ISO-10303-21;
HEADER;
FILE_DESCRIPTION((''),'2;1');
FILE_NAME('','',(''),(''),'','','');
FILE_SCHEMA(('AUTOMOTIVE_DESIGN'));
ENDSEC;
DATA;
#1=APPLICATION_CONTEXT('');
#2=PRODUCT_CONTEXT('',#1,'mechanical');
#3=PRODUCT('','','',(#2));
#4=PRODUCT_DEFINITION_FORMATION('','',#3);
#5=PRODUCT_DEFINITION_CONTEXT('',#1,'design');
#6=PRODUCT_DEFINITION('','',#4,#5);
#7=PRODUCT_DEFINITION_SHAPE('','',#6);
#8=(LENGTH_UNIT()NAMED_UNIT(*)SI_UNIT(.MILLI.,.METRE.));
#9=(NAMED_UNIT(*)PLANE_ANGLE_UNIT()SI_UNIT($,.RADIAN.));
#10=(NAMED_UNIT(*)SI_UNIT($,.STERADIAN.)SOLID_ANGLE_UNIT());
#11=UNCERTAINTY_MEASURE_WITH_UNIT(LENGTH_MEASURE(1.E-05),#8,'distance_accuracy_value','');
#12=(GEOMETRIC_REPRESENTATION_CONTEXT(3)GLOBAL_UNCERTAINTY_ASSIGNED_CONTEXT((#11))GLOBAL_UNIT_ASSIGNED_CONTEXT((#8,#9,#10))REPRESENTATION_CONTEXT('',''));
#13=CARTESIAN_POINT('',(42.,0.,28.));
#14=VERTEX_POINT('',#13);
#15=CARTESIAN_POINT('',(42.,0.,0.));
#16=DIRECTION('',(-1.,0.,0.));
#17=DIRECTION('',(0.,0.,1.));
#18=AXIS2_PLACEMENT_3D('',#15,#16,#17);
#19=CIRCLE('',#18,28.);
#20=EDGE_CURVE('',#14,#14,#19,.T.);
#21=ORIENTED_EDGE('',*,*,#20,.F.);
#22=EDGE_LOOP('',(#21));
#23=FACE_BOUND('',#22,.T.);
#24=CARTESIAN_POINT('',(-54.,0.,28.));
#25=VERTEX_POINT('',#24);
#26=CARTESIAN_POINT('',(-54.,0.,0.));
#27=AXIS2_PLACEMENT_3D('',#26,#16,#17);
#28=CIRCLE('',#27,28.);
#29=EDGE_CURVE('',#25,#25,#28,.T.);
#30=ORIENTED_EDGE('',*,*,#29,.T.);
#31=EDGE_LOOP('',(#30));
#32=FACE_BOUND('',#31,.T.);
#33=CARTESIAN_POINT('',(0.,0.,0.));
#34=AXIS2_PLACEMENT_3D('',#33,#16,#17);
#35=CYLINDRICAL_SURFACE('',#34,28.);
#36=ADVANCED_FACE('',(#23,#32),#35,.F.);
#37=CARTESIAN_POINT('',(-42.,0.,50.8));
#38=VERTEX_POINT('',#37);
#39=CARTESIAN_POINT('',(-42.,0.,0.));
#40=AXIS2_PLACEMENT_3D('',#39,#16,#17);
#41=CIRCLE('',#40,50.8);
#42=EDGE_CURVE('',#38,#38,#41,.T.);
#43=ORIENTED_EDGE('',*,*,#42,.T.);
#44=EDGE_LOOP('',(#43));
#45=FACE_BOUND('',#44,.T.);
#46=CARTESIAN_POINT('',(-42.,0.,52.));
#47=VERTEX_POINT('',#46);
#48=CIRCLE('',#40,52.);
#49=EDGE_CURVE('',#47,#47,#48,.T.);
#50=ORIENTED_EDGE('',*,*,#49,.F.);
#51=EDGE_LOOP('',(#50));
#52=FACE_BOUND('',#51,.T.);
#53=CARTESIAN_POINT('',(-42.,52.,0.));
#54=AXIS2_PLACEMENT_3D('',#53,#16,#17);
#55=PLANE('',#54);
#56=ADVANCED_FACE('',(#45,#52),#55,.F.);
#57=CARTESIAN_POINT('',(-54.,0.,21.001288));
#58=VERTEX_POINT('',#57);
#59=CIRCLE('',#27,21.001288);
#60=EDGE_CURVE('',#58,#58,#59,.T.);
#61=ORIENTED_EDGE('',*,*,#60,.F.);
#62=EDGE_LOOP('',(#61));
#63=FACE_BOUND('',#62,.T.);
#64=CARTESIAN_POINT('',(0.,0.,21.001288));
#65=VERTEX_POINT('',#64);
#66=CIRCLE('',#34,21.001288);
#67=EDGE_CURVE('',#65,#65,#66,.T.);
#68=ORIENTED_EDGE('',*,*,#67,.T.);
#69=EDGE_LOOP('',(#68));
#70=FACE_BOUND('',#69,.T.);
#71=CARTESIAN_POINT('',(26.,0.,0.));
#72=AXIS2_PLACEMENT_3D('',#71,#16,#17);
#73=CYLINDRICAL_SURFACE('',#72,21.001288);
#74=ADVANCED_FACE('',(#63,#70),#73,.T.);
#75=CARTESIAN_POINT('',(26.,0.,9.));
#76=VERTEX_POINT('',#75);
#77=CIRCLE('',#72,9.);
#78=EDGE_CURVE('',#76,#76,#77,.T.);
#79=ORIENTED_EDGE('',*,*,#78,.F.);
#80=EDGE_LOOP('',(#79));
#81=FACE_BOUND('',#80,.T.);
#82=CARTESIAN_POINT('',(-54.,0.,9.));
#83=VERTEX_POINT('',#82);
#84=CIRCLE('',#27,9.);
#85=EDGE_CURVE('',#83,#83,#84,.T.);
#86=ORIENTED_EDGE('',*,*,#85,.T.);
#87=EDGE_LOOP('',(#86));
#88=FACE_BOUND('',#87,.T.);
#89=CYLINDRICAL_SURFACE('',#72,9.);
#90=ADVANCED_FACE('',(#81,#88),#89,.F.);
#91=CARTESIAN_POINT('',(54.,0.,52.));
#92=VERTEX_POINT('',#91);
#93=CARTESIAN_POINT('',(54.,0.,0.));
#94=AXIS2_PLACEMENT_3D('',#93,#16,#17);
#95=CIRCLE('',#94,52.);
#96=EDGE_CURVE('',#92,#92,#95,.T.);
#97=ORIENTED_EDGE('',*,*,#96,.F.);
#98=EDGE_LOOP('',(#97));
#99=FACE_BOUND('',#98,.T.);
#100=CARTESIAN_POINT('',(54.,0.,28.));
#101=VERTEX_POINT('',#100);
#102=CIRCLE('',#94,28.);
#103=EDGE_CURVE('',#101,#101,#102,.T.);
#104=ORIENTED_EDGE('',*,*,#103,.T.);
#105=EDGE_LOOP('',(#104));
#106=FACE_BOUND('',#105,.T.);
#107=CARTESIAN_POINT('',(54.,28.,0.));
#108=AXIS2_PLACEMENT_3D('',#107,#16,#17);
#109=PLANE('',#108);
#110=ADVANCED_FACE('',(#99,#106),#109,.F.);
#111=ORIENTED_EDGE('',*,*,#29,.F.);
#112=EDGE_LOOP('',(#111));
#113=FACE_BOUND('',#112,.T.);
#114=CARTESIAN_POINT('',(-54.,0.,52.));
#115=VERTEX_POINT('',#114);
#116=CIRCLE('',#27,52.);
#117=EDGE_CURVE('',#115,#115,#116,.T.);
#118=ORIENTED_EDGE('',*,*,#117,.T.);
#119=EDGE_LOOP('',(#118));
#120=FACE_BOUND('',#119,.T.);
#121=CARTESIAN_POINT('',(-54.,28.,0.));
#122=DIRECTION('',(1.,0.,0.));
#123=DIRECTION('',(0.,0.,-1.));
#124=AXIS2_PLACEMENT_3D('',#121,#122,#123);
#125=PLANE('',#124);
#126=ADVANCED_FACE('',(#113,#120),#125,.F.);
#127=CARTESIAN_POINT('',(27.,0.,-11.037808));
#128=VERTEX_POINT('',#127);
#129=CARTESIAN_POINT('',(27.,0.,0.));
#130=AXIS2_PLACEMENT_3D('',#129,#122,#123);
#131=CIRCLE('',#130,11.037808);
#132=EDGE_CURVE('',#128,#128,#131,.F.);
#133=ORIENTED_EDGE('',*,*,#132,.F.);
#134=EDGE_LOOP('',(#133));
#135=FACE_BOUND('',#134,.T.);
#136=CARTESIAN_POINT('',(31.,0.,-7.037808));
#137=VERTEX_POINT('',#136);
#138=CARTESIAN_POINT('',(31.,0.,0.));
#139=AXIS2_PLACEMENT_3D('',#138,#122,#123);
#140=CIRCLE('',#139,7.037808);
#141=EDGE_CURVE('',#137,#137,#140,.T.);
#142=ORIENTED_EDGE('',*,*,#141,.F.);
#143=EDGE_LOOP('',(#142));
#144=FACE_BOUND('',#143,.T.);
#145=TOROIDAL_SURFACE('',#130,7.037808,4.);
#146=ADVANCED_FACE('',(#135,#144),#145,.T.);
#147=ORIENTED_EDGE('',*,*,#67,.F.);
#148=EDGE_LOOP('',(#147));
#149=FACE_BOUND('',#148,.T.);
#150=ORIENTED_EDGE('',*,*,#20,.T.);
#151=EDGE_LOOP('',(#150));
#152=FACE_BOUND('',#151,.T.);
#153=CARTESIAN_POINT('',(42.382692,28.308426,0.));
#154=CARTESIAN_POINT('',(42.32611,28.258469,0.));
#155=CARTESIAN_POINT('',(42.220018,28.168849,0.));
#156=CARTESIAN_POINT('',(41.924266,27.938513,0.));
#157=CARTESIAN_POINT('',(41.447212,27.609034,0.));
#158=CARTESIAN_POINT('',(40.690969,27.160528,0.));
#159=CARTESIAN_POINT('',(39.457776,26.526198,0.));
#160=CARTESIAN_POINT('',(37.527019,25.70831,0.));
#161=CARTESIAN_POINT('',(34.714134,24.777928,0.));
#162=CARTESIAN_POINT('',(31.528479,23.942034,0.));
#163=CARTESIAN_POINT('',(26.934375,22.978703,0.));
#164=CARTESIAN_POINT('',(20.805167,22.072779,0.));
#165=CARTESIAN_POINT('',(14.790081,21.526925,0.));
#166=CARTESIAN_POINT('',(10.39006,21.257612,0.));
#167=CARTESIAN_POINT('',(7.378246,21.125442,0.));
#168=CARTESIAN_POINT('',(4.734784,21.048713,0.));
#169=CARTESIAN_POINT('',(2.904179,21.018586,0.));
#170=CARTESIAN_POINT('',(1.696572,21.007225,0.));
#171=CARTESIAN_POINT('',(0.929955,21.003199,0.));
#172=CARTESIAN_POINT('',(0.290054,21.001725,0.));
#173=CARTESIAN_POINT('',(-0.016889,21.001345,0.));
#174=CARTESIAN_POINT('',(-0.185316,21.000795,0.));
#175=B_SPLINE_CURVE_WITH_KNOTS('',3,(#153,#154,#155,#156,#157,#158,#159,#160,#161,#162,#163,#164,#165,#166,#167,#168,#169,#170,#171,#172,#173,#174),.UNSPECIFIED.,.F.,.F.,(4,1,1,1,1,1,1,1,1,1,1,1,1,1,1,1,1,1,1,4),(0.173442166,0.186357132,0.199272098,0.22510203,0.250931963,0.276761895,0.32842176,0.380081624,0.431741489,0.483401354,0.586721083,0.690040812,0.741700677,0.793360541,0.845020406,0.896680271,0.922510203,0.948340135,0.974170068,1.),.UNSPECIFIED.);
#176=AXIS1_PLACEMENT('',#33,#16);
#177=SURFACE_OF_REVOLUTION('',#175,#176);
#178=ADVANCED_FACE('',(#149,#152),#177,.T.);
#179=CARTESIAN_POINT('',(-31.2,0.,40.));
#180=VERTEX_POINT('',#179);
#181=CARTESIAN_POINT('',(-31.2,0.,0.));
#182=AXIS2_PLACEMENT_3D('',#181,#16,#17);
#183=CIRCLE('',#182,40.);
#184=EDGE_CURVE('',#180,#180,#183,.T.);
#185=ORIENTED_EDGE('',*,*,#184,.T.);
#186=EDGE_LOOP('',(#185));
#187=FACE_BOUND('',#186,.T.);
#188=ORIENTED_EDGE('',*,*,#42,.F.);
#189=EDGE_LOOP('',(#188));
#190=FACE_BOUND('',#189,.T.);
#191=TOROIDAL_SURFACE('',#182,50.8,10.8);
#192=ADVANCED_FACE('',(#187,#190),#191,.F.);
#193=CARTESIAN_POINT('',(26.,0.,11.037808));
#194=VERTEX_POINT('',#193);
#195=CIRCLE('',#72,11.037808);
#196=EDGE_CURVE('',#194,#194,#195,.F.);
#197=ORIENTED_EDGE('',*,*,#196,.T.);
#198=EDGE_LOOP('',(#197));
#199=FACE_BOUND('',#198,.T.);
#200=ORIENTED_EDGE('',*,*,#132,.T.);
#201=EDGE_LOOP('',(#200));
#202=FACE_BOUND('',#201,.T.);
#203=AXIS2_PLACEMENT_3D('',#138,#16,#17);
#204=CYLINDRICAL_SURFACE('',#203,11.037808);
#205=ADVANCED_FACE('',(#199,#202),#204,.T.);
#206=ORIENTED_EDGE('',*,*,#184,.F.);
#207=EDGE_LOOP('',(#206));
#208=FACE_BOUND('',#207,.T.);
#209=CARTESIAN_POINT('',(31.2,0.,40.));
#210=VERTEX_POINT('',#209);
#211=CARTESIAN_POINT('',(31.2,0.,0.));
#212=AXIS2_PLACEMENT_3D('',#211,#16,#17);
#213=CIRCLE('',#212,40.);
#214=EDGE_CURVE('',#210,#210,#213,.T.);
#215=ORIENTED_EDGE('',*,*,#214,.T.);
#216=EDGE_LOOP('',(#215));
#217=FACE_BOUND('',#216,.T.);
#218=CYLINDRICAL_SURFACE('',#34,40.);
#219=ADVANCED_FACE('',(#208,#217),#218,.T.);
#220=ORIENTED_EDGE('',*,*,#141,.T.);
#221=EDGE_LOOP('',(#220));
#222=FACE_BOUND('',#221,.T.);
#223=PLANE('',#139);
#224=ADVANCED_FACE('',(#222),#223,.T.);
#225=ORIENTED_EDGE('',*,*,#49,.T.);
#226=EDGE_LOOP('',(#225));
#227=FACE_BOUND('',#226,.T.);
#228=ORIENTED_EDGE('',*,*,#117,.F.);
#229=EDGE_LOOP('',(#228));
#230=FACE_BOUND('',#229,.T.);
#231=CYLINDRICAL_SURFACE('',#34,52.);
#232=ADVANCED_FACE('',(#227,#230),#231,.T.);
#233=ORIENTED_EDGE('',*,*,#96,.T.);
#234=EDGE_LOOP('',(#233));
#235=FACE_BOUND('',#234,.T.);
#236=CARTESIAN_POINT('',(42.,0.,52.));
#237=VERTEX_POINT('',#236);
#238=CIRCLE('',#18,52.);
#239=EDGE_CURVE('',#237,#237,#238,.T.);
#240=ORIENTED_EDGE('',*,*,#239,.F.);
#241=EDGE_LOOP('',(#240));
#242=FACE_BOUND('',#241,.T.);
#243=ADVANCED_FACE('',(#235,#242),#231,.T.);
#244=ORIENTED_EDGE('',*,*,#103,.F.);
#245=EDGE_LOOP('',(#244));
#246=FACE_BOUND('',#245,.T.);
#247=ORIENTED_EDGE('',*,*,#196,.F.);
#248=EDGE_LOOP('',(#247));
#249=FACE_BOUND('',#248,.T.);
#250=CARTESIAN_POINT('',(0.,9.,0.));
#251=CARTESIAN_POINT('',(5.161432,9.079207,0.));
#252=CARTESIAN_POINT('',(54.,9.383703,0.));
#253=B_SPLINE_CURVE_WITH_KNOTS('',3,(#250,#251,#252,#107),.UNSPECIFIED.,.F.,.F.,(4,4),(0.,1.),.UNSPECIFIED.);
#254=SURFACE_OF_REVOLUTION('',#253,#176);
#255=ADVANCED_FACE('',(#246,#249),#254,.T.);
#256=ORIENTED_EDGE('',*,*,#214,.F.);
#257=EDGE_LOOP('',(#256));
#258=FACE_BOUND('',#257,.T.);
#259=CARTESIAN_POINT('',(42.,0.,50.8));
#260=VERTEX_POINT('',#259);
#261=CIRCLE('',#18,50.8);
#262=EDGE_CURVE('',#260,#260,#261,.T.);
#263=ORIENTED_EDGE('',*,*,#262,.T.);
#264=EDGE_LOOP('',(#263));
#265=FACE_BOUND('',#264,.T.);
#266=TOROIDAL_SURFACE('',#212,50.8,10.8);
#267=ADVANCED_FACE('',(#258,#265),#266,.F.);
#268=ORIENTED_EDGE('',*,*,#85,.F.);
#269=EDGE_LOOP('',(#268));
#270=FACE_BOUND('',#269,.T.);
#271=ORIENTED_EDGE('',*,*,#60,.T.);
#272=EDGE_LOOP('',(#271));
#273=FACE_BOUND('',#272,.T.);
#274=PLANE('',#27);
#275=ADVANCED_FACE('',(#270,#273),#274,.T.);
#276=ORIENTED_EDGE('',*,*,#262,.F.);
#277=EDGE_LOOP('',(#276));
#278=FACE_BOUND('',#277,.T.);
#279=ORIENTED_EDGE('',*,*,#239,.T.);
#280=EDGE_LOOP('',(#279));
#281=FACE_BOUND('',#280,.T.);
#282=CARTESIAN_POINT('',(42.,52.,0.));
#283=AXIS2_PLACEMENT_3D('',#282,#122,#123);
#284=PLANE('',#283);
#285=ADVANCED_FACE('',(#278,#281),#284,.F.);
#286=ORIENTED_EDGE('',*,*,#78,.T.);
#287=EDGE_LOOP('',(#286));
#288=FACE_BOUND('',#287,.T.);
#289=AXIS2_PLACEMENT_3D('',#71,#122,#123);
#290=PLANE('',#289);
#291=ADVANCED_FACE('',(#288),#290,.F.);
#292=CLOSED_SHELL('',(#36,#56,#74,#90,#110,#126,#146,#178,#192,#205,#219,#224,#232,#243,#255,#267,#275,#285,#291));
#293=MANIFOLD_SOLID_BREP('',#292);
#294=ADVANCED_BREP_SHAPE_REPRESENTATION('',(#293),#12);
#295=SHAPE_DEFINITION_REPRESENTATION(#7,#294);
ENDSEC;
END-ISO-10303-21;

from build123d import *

# Parameters (mm, degrees)
R_VOLUTION3_OUTLINE_W = 12
R_VOLUTION3_OUTLINE_H = 12
ESQUISSE2_R           = 21.001288109
ESQUISSE2_R_2         = 9
BOSS_EXTRU_1_DEPTH    = 80
ESQUISSE3_R           = 11.037807833
BOSS_EXTRU_2_DEPTH    = 5
CONG_1_R              = 4


# Read off the part's stored shape, not the designer's step: Révolution3
with BuildPart() as part:
    # Révolution3 outline → Révolution3 (revolve)
    with BuildSketch(Plane.YX):
        with BuildLine():
            add(Edge.make_bspline(
                [(9, 0), (9.053826316, 3.507535605), (9.211693628, 27.185630898), (15.14970787, 42)],
                knots=[0, 0, 0, 0, 0.679566397, 0.679566397, 0.679566397, 0.679566397], degree=3))
            Line((9, 0), (21.001288109, 0))
            Line((21.001288109, 0), (21.001288109, 42))
            Line((21.001288109, 42), (15.14970787, 42))
        make_face()
        with BuildLine():
            add(Edge.make_bspline(
                [(15.14970787, 42), (16.682530626, 45.824140722), (18.600512592, 49.057648401), (21.001288109, 51.201106105)],
                knots=[0.679566397, 0.679566397, 0.679566397, 0.679566397, 0.854987808, 0.854987808, 0.854987808, 0.854987808], degree=3))
            Line((15.14970787, 42), (21.001288109, 42))
            Line((21.001288109, 42), (21.001288109, 51.201106105))
        make_face()
        with BuildLine():
            Line((21.001288109, 42), (21.001288109, 0))
            add(Edge.make_bspline(
                [(28, 42), (27.997779305, 41.997025444), (27.875050115, 41.83237842), (27.609034397, 41.447212382), (27.160528215, 40.690969165), (26.526197616, 39.457776411), (25.708310332, 37.527019057), (24.777928166, 34.714134126), (23.942034299, 31.528478566), (22.978703398, 26.934375104), (22.072778857, 20.805167001), (21.526924747, 14.790080699), (21.257611914, 10.390059795), (21.125442102, 7.378245527), (21.048712817, 4.734783543), (21.018586389, 2.904179393), (21.007225123, 1.69657239), (21.003198587, 0.929954604), (21.001909089, 0.369945076), (21.0015083, 0.102272875), (21.001288109, 0)],
                knots=[0.198795247, 0.198795247, 0.198795247, 0.198795247, 0.199272098, 0.22510203, 0.250931963, 0.276761895, 0.32842176, 0.380081624, 0.431741489, 0.483401354, 0.586721083, 0.690040812, 0.741700677, 0.793360541, 0.845020406, 0.896680271, 0.922510203, 0.948340135, 0.974170068, 0.990325422, 0.990325422, 0.990325422, 0.990325422], degree=3))
            Line((28, 42), (21.001288109, 42))
        make_face()
        with BuildLine():
            add(Edge.make_bspline(
                [(21.001288109, 51.201106105), (22.985890317, 52.972996421), (25.300409981, 54), (28, 54)],
                knots=[0.854987808, 0.854987808, 0.854987808, 0.854987808, 1, 1, 1, 1], degree=3))
            Line((21.001288109, 51.201106105), (21.001288109, 42))
            Line((21.001288109, 42), (28, 42))
            Line((28, 42), (28, 54))
        make_face()
        Polygon((40, 42), (28, 42), (28, 0), (40, 0), (40, 31.2), align=None)
        with Locations((34, 48)):
            Rectangle(R_VOLUTION3_OUTLINE_W, R_VOLUTION3_OUTLINE_H)
        Polygon((40, 0), (28, 0), (28, -54), (40, -54), (40, -31.2), align=None)
        with BuildLine():
            Line((50.8, 42), (40, 42))
            Line((40, 42), (40, 31.2))
            ThreePointArc((40, 31.2), (43.163246763, 38.836753237), (50.8, 42))
        make_face()
        Polygon((40, 54), (40, 42), (50.8, 42), (52, 42), (52, 54), align=None)
        with BuildLine():
            Line((40, -31.2), (40, -54))
            Line((40, -54), (52, -54))
            Line((52, -54), (52, -42))
            Line((52, -42), (50.8, -42))
            ThreePointArc((50.8, -42), (43.163246763, -38.836753237), (40, -31.2))
        make_face()
    revolve(axis=Axis((0, 0, 0), (1, 0, 0)))

    # Esquisse2 → Boss.-Extru.1 (add)
    with BuildSketch(Plane.ZY.offset(54)):
        Circle(ESQUISSE2_R)
        Circle(ESQUISSE2_R_2, mode=Mode.SUBTRACT)
    extrude(amount=-BOSS_EXTRU_1_DEPTH)

    # Esquisse3 → Boss.-Extru.2 (add)
    with BuildSketch(Plane(origin=(26, 0, 0), x_dir=(0, 0, -1), z_dir=(1, 0, 0))):
        with Locations(Location((0, 0, 0), (0, 0, 180))):
            Circle(ESQUISSE3_R)
    extrude(amount=BOSS_EXTRU_2_DEPTH)

    # Congé1
    cong_1_edges = [part.edges().sort_by_distance(p)[0] for p in [
        (31, 0, -11.037807833),
    ]]
    fillet(cong_1_edges, radius=CONG_1_R)


solid = part.part
